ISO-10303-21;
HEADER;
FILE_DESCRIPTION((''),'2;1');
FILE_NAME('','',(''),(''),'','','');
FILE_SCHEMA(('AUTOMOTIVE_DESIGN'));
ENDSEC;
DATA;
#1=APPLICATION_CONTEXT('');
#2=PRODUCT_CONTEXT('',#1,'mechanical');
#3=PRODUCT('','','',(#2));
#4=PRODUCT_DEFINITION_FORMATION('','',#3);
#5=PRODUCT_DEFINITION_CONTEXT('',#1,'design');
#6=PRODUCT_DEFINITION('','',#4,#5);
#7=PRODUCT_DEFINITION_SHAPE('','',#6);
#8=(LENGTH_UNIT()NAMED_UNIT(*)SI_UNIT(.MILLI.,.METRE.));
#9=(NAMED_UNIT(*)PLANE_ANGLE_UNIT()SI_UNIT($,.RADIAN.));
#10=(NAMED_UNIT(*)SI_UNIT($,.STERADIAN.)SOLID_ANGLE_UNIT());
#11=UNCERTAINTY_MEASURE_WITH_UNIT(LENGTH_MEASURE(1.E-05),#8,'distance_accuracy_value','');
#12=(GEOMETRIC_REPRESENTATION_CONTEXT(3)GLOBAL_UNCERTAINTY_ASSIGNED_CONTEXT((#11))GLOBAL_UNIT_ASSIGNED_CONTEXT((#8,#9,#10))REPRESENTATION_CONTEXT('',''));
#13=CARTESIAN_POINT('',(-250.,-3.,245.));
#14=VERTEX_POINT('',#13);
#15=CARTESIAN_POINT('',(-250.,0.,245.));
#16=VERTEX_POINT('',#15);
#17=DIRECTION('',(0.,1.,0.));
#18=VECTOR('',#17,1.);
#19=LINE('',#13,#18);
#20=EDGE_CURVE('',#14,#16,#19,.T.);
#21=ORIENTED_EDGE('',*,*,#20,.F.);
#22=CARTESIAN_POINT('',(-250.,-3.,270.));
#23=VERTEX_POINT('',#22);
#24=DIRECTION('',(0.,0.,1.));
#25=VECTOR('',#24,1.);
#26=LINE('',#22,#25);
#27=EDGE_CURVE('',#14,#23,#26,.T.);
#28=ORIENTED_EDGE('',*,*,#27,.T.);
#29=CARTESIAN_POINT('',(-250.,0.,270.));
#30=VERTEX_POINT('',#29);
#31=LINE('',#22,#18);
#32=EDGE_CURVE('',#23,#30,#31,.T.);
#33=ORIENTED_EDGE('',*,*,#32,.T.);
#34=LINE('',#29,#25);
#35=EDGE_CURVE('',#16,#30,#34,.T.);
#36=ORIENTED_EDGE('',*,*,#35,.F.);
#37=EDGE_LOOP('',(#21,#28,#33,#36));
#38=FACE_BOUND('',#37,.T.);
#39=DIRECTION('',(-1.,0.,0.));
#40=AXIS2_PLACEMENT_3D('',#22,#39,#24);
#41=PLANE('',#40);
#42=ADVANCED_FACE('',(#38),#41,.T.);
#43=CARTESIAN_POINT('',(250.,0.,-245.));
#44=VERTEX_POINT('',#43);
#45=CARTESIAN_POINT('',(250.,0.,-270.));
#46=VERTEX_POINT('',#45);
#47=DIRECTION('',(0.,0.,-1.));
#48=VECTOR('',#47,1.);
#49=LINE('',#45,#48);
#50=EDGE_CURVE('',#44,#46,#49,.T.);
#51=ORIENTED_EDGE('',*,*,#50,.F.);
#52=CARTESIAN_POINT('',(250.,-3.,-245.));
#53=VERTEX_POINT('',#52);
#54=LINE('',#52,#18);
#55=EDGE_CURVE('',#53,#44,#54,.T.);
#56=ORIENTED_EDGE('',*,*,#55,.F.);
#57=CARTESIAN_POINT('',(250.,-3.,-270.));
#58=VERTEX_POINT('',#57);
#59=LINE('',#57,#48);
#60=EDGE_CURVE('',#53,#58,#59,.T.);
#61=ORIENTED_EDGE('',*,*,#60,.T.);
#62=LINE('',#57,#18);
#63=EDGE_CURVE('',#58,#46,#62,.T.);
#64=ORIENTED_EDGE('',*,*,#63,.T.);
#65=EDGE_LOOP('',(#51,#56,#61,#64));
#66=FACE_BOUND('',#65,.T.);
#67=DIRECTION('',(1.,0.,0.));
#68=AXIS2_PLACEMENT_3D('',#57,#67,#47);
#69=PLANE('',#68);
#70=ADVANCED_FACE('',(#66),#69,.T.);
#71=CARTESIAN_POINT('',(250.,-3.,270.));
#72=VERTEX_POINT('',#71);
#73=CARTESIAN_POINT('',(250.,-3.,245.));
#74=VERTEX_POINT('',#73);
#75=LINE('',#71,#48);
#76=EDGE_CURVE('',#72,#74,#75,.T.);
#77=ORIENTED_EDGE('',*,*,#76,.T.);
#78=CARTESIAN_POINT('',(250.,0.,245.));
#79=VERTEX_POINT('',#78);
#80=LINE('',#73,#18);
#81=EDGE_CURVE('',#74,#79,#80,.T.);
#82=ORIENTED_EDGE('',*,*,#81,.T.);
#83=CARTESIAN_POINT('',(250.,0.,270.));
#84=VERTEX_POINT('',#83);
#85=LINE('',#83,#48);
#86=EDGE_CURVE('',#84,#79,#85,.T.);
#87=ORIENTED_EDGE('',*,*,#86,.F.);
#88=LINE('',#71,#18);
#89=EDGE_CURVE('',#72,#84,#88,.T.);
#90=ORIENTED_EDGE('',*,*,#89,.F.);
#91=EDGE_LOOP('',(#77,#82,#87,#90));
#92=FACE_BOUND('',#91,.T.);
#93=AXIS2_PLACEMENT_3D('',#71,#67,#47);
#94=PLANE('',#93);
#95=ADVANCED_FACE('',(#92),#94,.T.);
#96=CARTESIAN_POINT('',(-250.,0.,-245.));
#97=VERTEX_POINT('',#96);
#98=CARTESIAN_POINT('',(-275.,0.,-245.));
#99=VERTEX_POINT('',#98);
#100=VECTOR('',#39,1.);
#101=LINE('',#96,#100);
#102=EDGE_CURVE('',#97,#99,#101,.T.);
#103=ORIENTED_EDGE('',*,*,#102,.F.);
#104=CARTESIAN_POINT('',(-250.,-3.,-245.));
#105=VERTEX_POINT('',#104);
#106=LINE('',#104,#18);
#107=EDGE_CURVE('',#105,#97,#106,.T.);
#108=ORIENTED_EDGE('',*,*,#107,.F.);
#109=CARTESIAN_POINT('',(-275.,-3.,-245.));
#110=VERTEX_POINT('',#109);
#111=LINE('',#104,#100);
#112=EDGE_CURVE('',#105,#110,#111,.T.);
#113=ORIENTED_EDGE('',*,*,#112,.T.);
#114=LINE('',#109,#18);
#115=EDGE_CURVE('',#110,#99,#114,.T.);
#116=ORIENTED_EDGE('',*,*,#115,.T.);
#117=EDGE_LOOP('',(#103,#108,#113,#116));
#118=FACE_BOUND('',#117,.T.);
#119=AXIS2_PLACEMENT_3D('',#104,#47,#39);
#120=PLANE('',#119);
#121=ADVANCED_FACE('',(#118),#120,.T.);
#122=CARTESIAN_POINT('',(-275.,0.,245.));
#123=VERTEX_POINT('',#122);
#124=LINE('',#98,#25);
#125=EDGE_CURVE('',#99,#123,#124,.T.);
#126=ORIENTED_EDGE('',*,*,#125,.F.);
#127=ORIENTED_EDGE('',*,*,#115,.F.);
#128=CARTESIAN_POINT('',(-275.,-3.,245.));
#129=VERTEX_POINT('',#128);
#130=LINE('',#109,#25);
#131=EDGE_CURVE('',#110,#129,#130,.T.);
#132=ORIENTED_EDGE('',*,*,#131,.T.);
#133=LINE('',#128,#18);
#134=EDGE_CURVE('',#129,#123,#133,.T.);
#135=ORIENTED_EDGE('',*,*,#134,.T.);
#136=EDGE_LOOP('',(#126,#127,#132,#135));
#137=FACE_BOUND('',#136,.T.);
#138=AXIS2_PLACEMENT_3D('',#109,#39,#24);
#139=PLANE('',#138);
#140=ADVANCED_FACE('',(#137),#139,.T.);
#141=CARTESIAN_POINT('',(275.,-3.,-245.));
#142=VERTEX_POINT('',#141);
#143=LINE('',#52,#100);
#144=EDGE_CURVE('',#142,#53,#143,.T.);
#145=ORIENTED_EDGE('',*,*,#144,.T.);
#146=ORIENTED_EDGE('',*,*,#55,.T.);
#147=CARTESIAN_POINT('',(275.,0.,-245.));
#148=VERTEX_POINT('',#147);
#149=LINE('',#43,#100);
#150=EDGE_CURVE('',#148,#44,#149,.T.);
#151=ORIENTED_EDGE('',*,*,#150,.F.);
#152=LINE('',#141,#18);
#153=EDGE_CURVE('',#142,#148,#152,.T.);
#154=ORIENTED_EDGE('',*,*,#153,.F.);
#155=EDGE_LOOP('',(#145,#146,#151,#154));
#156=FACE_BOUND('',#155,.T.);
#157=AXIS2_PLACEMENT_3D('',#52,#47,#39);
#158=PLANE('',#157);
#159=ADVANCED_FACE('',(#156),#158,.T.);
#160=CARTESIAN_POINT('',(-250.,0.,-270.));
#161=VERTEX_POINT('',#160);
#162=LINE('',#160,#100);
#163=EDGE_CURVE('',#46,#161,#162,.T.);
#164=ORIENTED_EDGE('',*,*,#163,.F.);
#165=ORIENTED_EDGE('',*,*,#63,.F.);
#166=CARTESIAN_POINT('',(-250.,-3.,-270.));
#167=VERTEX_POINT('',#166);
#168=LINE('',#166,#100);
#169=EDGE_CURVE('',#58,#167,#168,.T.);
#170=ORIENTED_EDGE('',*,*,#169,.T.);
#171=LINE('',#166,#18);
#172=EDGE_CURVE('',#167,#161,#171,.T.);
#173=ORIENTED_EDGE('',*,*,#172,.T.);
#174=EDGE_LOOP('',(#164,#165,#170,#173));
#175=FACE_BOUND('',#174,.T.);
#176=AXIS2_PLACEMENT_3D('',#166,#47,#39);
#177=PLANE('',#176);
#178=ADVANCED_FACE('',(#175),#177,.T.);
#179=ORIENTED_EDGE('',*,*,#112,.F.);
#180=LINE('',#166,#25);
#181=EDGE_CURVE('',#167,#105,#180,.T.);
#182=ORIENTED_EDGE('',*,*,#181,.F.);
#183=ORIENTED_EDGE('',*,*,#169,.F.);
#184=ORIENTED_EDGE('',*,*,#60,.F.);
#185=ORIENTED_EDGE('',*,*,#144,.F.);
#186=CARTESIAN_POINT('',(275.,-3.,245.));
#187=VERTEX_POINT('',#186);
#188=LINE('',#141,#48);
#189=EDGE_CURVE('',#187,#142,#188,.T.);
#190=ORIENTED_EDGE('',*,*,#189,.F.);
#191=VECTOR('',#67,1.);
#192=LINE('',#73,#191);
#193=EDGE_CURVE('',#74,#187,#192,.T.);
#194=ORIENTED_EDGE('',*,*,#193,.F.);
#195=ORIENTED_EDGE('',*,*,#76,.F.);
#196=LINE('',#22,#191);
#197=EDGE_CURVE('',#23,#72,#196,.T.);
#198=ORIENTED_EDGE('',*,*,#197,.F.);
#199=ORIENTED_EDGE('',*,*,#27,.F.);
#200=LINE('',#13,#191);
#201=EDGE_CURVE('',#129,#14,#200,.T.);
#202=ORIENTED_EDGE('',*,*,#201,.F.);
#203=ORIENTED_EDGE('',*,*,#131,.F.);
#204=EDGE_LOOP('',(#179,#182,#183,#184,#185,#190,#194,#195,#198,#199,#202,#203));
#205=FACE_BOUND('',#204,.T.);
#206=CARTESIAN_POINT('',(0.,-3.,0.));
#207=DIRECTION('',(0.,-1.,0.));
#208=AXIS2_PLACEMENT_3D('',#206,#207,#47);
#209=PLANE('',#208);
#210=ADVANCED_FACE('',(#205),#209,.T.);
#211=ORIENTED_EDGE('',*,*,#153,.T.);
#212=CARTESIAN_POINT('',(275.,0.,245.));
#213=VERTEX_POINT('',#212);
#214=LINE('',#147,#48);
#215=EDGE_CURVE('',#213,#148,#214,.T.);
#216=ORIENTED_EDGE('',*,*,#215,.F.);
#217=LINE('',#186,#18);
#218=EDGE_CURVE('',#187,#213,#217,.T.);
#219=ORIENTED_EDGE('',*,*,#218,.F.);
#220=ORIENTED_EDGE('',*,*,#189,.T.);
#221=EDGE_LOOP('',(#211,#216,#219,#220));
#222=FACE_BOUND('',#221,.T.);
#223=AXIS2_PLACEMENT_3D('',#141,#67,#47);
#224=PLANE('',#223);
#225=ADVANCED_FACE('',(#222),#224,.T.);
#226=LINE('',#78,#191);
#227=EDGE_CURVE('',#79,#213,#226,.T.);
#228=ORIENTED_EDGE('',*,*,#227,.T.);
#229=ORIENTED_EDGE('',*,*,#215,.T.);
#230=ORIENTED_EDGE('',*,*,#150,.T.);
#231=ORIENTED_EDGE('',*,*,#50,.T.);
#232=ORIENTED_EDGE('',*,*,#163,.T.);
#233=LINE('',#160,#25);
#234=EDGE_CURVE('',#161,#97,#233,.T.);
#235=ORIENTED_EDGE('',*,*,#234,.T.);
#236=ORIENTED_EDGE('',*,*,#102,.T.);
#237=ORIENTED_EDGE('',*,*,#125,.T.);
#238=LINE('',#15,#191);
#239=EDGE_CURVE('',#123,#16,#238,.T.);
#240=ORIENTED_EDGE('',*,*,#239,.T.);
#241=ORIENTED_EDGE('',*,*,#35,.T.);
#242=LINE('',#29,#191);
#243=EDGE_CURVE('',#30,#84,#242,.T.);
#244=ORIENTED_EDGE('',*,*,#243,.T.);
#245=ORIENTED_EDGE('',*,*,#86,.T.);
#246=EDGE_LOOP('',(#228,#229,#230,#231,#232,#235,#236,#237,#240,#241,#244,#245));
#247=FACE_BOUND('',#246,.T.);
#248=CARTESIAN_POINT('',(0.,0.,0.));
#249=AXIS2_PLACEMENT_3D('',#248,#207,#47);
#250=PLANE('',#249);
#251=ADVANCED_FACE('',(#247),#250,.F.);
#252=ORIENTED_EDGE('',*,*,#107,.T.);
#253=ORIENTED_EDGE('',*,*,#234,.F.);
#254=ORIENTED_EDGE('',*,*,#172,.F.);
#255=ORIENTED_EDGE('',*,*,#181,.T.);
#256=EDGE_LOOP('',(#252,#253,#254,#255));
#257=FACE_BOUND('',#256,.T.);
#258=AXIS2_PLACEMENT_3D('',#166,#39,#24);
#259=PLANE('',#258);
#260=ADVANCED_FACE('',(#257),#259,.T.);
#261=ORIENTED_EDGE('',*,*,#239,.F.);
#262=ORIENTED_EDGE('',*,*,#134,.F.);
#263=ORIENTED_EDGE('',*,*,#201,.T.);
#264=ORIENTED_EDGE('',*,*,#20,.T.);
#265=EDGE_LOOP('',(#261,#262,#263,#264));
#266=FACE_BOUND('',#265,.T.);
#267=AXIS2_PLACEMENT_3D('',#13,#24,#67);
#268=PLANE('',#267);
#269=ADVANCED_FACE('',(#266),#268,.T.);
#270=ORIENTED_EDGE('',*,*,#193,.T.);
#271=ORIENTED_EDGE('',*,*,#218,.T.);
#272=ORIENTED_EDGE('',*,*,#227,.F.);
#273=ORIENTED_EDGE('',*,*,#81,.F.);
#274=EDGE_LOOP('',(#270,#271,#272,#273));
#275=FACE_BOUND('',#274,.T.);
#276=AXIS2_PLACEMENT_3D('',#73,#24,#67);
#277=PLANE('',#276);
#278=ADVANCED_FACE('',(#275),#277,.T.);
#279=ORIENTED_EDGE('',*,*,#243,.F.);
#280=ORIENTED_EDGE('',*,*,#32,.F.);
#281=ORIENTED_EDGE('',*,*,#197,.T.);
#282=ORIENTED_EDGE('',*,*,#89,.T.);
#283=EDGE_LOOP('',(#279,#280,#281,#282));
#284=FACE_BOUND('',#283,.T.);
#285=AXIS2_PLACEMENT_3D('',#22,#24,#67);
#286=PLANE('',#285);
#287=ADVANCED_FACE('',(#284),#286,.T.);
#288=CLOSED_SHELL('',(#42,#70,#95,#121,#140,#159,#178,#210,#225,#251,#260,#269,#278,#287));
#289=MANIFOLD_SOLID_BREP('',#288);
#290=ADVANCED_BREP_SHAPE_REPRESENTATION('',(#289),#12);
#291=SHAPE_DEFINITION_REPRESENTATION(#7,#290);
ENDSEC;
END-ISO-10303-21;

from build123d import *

# Parameters (mm, degrees)
BASE_FLANGE1_DEPTH = 3


# Sheet-metal steps are written as plain solids
with BuildPart() as part:
    # Sketch1 → Base-Flange1 (new body)
    with BuildSketch(Plane(origin=(0, 0, 0), x_dir=(1, 0, 0), z_dir=(0, 1, 0))):
        Polygon((250, 270), (250, 245), (275, 245), (275, -245), (250, -245), (250, -270), (-250, -270), (-250, -245), (-275, -245), (-275, 245), (-250, 245), (-250, 270), align=None)
    extrude(amount=-BASE_FLANGE1_DEPTH)


solid = part.part
